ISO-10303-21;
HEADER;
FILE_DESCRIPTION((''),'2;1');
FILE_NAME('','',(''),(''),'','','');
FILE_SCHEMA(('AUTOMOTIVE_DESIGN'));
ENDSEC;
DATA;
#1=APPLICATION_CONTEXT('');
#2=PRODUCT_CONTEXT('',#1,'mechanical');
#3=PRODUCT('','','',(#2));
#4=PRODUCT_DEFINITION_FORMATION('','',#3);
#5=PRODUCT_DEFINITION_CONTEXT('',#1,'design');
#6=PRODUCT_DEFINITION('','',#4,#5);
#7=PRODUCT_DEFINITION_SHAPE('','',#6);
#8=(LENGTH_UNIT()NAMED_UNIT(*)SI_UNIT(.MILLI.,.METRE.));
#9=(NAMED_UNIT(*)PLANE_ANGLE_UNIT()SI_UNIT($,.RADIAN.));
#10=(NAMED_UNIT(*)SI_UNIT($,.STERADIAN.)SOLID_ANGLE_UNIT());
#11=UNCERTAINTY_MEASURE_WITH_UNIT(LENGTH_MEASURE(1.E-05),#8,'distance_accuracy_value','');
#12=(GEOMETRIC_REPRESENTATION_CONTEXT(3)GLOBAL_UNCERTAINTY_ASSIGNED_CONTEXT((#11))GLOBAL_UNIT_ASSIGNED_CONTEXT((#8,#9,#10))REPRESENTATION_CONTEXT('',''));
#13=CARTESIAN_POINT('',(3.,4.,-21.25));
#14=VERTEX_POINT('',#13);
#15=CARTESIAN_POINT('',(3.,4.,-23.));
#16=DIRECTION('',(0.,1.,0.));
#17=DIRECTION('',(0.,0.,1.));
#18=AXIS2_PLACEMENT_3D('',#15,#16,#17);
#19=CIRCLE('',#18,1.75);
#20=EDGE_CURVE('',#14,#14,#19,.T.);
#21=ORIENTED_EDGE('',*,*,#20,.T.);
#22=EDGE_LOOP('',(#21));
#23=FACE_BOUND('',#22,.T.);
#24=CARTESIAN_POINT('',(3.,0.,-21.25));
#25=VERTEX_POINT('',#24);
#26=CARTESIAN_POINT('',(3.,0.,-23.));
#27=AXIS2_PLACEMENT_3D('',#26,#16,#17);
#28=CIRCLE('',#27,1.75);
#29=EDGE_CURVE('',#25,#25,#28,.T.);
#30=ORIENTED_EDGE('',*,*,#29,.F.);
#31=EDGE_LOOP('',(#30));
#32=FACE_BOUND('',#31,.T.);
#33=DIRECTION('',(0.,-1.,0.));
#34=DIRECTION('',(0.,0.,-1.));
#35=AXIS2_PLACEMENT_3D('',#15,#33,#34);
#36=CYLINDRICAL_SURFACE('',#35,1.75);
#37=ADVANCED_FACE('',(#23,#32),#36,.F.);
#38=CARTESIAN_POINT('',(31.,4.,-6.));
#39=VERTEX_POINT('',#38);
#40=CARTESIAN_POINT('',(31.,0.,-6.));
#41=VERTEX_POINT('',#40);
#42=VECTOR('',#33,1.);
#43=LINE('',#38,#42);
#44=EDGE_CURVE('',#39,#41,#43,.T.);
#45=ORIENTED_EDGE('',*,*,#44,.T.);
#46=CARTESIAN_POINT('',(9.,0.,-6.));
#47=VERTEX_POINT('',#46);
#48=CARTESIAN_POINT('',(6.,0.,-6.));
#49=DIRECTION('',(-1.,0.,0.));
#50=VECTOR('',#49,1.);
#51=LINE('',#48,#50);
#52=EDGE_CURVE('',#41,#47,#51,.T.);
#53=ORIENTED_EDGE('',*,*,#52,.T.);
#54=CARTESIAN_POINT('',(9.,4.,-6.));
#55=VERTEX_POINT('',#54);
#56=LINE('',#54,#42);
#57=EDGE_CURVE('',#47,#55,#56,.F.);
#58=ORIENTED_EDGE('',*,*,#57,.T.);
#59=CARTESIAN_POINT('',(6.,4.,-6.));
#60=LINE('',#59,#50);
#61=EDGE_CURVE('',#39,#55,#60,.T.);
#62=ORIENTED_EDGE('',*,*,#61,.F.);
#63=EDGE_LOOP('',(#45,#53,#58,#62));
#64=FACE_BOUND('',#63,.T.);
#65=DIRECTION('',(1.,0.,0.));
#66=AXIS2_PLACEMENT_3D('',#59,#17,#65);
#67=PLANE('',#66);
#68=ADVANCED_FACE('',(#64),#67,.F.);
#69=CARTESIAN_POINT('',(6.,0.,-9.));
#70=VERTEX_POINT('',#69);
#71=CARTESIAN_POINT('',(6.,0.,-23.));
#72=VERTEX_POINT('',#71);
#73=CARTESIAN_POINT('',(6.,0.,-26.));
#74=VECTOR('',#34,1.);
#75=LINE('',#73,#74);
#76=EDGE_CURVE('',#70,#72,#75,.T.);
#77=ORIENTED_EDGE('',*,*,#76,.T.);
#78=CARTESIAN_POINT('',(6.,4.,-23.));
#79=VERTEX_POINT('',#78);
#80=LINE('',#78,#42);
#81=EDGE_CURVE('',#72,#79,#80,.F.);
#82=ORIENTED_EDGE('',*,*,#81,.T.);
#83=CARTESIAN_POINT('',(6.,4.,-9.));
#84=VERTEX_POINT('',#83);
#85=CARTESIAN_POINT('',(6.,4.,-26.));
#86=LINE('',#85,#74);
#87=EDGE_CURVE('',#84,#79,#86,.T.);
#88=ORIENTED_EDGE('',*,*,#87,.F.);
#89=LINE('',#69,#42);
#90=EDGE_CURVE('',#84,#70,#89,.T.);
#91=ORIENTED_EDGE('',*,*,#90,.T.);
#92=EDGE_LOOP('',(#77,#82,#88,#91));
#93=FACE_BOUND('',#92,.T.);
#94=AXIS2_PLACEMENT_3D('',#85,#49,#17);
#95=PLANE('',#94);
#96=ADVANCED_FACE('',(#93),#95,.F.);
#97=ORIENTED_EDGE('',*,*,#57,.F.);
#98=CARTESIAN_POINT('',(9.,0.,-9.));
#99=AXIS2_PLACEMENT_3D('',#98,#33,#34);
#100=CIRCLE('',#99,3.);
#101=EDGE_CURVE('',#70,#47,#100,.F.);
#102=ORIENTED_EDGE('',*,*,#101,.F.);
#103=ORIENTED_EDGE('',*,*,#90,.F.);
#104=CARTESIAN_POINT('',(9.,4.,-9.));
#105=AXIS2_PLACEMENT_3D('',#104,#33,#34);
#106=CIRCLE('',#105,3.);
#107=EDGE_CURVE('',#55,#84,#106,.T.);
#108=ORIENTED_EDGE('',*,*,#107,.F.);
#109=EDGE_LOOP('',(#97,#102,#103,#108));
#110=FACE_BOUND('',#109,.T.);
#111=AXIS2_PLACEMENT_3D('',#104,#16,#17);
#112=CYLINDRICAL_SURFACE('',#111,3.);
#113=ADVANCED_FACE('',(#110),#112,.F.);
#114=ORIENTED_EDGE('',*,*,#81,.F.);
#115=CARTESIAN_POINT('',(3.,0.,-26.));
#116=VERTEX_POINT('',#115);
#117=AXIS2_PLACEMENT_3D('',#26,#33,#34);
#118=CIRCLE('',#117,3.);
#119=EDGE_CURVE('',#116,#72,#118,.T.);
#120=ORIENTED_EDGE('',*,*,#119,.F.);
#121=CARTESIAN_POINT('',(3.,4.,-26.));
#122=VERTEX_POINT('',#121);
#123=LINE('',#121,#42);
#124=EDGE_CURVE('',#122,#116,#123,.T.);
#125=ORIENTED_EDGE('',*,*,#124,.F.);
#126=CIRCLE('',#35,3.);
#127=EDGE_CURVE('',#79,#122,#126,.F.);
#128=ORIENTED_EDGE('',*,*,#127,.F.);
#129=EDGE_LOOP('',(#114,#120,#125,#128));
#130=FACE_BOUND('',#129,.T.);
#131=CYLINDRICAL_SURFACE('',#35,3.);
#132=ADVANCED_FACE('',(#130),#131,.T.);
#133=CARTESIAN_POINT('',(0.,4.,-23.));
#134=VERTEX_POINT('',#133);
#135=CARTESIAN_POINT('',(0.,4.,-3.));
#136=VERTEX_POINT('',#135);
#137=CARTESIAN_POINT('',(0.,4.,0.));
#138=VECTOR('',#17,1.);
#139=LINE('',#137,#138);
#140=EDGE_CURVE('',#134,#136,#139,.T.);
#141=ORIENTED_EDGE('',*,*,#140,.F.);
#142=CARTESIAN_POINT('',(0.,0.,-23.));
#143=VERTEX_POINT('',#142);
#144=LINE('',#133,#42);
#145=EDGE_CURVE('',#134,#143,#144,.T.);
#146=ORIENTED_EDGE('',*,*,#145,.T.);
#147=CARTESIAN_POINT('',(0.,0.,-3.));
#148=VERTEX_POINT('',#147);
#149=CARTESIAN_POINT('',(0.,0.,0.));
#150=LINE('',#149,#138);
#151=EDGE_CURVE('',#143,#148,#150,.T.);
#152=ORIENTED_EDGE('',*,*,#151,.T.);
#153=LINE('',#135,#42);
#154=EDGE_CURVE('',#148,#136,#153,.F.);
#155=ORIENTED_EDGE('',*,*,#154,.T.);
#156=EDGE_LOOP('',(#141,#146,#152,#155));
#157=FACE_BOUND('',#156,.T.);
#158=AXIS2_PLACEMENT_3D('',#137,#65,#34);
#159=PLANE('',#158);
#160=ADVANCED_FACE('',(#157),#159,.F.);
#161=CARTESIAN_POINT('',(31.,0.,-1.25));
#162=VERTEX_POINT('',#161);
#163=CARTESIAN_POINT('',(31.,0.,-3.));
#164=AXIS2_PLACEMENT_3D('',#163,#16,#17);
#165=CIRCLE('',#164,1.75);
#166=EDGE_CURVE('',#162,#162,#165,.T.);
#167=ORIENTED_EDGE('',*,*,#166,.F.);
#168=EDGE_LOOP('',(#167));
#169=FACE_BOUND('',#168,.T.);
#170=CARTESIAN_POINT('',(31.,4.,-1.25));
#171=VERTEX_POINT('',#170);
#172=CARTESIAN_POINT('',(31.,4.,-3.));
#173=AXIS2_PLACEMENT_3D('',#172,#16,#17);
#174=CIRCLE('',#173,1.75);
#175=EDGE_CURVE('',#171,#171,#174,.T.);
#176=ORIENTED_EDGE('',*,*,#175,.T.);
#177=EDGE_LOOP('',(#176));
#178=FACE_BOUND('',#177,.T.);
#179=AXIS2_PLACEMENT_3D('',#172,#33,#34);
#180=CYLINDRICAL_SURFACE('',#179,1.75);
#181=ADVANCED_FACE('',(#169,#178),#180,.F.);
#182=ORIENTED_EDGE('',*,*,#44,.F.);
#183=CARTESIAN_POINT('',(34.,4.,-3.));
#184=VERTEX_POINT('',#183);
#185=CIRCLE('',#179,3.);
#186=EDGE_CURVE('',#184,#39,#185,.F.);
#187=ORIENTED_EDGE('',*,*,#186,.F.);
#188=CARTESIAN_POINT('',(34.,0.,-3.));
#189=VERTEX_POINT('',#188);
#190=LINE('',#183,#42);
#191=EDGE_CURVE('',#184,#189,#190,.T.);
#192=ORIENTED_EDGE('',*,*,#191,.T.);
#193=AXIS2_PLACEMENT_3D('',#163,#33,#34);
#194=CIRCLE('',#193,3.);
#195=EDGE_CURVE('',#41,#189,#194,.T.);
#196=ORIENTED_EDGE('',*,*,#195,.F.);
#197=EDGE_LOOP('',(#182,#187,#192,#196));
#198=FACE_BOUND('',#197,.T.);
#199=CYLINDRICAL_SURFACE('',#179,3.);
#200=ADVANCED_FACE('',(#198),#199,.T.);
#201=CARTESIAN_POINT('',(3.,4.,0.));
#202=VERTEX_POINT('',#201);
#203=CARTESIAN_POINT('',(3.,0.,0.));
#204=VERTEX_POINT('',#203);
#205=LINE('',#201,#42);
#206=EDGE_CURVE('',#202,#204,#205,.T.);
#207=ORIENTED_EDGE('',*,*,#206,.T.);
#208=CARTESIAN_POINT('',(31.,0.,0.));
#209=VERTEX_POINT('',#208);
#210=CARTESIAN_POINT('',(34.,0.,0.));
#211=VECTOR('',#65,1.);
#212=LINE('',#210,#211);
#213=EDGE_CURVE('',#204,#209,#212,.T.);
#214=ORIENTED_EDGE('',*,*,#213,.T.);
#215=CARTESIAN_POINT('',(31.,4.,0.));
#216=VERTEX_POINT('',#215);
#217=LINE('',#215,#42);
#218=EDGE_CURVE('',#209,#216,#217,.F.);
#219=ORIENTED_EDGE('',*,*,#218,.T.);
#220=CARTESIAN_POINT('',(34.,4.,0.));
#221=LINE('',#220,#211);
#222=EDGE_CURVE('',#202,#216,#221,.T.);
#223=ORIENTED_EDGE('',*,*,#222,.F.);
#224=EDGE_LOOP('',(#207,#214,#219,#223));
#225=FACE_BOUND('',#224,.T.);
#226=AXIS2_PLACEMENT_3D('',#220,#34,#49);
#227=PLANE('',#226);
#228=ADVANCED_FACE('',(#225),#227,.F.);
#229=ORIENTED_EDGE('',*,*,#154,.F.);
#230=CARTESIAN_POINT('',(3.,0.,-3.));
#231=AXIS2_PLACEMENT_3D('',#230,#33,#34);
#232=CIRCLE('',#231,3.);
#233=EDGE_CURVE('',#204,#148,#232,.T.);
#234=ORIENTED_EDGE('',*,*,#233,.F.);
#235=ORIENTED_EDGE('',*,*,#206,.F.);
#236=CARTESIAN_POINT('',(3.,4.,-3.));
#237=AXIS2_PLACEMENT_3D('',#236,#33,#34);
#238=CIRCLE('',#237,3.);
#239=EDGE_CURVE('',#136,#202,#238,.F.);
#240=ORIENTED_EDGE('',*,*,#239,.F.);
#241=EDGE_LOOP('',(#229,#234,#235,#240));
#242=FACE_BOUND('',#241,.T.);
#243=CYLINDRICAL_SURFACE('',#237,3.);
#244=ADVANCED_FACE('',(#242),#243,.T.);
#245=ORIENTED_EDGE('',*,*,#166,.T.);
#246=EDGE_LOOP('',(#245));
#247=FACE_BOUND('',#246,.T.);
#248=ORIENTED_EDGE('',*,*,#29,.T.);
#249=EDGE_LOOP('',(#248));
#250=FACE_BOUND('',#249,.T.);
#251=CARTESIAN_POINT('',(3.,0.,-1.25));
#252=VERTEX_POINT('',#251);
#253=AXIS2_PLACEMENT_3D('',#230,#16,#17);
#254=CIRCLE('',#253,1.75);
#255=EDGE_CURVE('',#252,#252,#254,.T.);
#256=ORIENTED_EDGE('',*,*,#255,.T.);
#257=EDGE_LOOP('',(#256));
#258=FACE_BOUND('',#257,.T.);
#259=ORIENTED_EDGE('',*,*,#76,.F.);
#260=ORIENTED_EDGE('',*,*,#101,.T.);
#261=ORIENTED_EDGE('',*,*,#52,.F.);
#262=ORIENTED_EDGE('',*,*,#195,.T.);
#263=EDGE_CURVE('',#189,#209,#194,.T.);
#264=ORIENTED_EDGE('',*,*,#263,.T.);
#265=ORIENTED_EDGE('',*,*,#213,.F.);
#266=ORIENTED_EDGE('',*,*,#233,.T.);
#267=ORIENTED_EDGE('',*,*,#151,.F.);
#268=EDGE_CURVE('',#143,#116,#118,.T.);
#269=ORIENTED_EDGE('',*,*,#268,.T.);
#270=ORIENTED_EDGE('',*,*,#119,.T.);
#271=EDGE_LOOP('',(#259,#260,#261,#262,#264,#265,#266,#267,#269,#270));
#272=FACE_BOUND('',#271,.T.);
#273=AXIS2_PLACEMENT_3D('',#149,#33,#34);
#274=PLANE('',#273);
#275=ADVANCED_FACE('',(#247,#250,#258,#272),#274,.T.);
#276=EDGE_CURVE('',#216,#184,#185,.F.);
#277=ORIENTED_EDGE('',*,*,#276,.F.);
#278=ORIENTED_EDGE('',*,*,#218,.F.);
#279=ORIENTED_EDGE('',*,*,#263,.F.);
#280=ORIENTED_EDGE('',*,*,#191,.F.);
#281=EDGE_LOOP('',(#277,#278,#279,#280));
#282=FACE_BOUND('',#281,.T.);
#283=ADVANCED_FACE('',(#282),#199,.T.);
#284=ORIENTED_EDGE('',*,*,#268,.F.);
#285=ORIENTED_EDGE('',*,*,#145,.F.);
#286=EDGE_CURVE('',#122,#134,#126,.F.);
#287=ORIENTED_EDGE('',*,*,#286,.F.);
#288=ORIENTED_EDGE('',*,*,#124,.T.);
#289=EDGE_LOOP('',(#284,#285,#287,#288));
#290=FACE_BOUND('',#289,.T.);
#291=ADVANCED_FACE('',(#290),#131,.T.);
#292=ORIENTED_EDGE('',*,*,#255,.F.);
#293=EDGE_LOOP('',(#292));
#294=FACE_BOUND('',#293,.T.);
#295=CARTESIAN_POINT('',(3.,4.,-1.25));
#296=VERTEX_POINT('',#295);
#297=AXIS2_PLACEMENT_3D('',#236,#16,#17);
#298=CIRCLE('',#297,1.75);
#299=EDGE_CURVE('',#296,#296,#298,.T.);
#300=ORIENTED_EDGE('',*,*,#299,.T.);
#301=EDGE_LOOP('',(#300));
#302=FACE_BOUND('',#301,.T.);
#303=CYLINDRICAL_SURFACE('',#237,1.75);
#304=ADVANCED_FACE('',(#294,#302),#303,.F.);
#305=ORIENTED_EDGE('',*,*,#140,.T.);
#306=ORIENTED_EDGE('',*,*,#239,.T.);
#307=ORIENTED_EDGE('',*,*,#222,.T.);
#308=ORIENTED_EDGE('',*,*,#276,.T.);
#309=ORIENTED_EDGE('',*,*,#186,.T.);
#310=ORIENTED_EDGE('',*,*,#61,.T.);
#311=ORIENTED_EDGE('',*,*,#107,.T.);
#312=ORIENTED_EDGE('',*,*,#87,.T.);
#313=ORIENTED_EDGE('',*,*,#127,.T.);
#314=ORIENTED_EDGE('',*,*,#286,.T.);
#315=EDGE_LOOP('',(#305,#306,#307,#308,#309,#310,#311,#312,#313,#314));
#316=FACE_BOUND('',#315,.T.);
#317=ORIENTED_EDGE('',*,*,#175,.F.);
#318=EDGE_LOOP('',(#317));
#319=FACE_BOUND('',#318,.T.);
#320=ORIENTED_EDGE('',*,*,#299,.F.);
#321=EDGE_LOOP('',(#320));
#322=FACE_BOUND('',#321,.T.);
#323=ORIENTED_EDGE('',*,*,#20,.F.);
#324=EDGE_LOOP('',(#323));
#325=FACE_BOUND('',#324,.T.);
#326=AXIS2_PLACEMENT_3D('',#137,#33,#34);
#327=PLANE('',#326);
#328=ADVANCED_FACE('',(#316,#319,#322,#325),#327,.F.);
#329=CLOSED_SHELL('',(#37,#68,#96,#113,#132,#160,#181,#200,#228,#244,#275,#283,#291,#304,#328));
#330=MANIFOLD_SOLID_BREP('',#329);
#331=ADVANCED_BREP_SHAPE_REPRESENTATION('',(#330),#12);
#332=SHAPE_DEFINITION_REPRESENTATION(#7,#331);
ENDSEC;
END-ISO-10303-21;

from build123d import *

# Parameters (mm, degrees)
CROQUIS1_R              = 1.75
SALIENTE_EXTRUIR1_DEPTH = 4
REDONDEO1_R             = 3


with BuildPart() as part:
    # Croquis1 → Saliente-Extruir1 (new body)
    with BuildSketch(Plane(origin=(0, 0, 0), x_dir=(1, 0, 0), z_dir=(0, 1, 0))):
        Polygon((0, 0), (0, 26), (6, 26), (6, 6), (34, 6), (34, 0), align=None)
        with Locations(Location((3, 23, 0), (0, 0, 270))):
            Circle(CROQUIS1_R, mode=Mode.SUBTRACT)
        with Locations(Location((31, 3, 0), (0, 0, 270))):
            Circle(CROQUIS1_R, mode=Mode.SUBTRACT)
        with Locations(Location((3, 3, 0), (0, 0, 270))):
            Circle(CROQUIS1_R, mode=Mode.SUBTRACT)
    extrude(amount=SALIENTE_EXTRUIR1_DEPTH)

    # Redondeo1
    redondeo1_edges = [part.edges().sort_by_distance(p)[0] for p in [
        (6, 2, -6),
        (0, 2, 0),
        (0, 2, -26),
        (6, 2, -26),
        (34, 2, -6),
        (34, 2, 0),
    ]]
    fillet(redondeo1_edges, radius=REDONDEO1_R - 0.0001)  # a hair under: the kernel refuses the full size


solid = part.part
